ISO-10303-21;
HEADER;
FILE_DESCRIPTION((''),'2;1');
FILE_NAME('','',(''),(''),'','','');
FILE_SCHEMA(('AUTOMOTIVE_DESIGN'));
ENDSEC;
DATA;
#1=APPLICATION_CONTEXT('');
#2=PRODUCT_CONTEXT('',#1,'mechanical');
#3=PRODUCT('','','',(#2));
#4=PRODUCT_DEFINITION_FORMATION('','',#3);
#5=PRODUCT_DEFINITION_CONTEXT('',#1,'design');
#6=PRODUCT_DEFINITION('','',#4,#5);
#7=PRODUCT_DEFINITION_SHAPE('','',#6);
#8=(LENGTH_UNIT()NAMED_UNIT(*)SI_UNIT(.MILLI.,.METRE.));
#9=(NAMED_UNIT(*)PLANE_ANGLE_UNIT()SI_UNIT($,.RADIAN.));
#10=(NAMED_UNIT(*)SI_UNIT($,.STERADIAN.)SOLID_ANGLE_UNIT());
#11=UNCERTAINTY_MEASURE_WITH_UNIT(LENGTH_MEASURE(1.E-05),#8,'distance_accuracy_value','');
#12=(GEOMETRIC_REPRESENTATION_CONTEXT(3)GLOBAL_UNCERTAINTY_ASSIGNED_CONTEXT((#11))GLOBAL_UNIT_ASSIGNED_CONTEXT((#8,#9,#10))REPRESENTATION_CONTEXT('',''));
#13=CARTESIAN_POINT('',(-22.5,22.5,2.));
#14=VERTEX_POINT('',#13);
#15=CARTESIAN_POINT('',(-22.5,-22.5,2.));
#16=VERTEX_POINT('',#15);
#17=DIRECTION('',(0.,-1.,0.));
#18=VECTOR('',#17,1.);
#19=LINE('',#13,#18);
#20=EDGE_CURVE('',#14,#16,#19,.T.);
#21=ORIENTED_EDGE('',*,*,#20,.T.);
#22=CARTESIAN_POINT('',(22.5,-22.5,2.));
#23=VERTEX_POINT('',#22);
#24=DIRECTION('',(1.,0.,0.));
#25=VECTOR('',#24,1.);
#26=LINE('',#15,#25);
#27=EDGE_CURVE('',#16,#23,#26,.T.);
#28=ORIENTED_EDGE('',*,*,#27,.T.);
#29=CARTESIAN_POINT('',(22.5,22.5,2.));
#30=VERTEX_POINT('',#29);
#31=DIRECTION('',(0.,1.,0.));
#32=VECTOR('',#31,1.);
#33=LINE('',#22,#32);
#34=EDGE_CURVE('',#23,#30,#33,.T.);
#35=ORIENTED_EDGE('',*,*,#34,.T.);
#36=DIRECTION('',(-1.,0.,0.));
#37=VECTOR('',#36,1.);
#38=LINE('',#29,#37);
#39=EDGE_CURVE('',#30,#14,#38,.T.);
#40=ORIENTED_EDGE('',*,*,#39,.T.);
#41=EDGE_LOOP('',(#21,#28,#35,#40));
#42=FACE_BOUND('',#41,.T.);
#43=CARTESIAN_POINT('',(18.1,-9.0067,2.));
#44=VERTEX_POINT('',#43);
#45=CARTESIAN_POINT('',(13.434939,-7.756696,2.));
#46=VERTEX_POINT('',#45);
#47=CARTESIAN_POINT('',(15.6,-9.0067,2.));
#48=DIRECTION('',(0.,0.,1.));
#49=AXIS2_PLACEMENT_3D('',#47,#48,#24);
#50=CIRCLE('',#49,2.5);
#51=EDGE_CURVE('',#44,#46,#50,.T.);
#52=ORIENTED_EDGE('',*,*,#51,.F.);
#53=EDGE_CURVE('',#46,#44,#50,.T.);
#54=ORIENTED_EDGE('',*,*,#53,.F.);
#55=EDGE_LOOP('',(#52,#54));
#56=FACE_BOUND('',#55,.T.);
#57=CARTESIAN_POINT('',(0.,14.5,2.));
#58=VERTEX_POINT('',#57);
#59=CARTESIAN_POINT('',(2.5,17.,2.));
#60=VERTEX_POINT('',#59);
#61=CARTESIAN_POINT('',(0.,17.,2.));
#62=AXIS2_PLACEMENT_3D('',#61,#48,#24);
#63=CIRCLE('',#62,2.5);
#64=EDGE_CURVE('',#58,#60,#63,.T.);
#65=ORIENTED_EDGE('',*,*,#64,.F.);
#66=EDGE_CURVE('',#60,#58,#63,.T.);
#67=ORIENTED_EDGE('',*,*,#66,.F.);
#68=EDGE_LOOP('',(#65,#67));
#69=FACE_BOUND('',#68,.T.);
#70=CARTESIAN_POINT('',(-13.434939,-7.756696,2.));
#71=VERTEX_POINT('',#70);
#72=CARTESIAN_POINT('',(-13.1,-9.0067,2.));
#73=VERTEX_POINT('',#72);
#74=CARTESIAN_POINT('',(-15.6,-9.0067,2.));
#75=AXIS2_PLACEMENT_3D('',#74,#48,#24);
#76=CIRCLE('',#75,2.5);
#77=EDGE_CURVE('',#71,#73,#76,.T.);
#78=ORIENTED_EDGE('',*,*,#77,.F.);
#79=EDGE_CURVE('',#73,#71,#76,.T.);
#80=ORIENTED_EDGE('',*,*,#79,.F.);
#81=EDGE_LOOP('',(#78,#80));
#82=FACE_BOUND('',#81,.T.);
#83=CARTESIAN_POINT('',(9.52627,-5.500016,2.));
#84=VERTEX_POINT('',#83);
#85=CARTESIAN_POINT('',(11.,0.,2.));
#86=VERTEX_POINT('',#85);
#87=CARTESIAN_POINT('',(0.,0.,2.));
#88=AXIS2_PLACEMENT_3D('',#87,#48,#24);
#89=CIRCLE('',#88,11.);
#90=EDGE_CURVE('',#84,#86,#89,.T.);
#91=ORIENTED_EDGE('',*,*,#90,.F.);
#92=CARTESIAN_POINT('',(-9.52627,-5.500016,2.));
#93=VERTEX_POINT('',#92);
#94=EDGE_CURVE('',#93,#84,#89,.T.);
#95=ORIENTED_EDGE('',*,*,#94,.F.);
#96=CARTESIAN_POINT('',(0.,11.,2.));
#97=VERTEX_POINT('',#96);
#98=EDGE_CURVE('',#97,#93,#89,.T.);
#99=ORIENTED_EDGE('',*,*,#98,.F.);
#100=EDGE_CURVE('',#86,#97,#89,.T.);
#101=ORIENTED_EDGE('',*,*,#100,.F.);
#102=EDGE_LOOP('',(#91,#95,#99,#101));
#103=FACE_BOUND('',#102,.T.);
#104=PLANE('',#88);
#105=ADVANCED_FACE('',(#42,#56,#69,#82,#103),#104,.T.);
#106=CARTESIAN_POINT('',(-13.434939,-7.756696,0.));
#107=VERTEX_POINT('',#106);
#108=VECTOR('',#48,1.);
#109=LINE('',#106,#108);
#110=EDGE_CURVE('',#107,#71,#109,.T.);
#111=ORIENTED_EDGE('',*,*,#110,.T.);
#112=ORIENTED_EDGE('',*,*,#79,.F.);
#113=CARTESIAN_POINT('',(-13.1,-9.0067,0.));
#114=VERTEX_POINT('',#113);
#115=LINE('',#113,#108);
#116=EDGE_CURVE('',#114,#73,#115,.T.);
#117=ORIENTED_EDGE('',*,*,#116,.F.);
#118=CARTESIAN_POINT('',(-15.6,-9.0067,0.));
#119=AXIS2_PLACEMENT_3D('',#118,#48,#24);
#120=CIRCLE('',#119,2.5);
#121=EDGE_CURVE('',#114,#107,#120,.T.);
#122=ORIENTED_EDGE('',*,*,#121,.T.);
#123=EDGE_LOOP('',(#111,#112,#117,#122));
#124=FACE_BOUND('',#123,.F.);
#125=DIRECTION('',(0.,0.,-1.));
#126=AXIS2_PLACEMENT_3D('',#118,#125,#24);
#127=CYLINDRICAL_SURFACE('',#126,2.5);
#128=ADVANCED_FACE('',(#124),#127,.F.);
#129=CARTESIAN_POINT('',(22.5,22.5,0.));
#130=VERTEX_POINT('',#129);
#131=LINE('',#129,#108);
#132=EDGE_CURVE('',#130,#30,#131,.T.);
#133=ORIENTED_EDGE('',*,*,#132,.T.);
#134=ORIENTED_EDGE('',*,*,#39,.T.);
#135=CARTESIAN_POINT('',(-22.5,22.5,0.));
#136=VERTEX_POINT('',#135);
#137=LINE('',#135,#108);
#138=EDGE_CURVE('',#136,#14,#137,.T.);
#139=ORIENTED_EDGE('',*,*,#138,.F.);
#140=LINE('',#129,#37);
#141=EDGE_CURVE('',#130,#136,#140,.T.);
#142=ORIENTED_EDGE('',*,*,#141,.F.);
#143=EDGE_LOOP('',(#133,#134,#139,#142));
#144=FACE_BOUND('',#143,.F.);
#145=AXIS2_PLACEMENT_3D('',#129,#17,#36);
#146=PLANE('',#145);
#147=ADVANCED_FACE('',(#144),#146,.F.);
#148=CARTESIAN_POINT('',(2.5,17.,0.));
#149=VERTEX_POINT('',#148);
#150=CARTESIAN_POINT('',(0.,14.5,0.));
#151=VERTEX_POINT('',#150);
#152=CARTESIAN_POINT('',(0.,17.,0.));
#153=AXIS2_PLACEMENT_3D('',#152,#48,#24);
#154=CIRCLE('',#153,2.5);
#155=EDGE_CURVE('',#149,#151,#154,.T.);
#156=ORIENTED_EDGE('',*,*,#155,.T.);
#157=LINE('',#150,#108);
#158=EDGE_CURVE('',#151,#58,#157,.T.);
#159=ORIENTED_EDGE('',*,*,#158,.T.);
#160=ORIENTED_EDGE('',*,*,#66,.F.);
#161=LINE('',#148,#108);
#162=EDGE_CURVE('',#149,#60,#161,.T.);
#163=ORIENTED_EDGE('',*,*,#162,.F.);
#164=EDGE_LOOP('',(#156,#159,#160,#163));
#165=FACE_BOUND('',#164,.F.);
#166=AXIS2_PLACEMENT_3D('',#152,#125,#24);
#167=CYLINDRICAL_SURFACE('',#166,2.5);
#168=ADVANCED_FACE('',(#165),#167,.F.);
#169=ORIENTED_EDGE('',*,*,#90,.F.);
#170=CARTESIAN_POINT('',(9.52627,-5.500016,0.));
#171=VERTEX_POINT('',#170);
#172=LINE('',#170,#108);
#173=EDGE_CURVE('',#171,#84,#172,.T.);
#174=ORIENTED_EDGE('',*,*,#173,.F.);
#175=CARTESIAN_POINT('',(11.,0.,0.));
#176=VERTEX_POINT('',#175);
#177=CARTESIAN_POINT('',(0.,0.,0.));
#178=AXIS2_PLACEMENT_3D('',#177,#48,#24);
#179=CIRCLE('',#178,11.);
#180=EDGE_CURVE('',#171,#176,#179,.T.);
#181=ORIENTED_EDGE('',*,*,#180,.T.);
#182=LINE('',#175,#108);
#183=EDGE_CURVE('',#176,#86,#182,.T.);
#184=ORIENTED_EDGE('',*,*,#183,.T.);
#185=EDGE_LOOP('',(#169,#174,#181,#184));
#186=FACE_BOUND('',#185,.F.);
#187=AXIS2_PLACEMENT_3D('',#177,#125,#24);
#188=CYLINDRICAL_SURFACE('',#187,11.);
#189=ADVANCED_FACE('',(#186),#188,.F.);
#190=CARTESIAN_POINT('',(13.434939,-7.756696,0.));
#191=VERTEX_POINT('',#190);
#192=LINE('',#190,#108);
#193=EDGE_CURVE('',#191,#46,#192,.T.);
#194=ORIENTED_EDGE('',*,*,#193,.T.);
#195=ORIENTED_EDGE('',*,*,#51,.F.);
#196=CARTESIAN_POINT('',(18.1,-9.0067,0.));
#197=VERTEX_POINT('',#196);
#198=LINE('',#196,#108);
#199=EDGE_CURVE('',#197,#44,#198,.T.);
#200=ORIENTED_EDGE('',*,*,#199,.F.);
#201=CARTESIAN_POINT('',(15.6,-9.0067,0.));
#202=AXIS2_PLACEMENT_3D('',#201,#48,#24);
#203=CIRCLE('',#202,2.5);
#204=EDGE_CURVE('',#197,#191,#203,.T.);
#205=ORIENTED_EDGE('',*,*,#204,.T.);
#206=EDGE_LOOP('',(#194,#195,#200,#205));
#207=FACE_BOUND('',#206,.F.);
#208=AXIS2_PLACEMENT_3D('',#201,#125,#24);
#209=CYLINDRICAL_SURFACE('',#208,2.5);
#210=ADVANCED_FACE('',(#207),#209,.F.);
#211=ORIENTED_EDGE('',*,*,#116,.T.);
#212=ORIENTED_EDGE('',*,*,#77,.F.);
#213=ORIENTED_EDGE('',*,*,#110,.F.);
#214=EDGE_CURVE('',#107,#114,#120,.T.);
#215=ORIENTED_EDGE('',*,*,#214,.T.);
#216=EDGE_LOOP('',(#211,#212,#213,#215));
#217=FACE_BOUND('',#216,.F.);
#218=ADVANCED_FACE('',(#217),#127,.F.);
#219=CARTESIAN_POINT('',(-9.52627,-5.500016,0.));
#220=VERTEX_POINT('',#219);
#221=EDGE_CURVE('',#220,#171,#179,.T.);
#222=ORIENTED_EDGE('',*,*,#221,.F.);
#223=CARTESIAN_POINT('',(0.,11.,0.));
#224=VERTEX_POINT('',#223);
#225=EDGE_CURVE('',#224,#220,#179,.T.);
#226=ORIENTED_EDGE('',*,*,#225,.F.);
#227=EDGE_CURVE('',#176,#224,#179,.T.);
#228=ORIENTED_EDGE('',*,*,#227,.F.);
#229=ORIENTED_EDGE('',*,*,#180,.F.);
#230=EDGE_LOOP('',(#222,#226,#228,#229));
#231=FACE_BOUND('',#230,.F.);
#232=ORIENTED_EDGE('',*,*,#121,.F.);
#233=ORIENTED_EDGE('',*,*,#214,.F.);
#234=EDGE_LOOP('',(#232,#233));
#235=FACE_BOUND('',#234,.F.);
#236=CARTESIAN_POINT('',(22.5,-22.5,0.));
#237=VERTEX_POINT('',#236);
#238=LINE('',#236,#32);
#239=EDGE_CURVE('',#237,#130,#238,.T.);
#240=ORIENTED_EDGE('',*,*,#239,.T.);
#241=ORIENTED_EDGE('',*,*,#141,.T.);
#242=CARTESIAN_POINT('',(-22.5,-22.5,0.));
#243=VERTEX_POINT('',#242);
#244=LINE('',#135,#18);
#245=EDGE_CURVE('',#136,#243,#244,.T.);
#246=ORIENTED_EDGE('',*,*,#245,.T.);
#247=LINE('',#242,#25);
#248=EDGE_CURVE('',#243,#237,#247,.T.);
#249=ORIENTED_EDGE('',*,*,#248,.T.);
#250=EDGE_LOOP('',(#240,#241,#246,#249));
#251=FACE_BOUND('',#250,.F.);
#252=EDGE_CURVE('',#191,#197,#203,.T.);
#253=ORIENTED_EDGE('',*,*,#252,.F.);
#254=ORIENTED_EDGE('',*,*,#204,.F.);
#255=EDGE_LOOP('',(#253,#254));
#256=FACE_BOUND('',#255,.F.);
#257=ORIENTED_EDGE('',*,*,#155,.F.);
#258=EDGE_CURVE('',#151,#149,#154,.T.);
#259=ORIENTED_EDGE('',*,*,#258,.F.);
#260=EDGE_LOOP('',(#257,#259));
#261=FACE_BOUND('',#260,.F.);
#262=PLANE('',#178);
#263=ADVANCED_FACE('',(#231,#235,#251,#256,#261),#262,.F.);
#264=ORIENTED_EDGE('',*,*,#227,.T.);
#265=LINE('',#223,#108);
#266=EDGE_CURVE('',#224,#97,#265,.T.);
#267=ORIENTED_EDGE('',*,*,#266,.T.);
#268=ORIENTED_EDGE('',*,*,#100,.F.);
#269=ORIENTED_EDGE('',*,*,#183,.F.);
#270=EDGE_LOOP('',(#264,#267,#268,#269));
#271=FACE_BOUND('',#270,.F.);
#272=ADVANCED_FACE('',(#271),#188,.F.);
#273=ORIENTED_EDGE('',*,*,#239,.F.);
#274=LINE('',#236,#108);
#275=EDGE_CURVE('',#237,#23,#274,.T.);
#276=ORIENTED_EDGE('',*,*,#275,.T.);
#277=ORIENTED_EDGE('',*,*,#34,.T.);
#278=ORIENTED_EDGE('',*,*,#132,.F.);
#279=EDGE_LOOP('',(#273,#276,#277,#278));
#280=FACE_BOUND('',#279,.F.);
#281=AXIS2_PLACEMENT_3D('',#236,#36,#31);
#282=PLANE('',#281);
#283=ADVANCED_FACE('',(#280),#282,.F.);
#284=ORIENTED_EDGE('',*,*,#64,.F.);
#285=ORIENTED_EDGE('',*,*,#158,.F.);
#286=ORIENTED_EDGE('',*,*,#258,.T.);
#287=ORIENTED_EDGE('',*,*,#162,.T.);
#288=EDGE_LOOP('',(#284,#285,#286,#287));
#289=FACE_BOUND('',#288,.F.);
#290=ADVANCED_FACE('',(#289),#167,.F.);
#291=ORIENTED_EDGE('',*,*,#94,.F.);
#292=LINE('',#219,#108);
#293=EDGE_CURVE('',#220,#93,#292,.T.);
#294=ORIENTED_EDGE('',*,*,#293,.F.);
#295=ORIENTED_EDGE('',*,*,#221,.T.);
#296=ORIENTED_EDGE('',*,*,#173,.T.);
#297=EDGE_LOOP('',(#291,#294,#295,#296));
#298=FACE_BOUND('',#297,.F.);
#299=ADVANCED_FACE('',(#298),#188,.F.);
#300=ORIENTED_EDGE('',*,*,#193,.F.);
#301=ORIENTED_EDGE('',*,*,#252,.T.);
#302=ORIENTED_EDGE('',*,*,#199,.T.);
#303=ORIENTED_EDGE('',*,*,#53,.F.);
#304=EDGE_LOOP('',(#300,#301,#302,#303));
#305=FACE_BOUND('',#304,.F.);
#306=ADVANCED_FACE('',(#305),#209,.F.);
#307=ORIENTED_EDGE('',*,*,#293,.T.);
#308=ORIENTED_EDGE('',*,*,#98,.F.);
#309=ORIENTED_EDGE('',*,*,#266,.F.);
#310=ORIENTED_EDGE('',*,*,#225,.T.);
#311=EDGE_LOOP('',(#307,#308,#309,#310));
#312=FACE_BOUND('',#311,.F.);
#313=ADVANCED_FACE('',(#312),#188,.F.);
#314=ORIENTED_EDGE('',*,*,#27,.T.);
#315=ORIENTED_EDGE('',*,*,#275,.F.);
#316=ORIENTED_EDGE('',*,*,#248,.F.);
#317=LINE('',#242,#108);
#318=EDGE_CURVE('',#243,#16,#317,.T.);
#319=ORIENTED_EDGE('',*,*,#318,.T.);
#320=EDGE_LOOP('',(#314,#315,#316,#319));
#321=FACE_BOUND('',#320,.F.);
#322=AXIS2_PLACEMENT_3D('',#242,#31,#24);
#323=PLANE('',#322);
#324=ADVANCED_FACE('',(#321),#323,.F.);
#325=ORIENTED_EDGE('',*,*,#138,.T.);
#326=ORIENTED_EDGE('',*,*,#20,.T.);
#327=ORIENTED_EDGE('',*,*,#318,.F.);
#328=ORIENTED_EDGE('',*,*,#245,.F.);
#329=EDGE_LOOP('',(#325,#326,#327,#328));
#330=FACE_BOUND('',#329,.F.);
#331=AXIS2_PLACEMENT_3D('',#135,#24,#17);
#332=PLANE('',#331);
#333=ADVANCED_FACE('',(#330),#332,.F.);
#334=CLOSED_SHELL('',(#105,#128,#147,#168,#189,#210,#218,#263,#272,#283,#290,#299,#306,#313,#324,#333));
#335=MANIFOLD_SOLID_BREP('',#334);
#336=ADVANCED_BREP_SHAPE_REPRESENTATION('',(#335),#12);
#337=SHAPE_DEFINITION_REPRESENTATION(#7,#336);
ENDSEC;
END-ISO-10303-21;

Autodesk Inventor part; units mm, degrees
ref_plane "YZ Plane" through (0, 0, 0) normal (1, 0, 0) x (0, 1, 0)
ref_plane "XZ Plane" through (0, 0, 0) normal (0, 1, 0) x (-1, 0, 0)
ref_plane "XY Plane" through (0, 0, 0) normal (0, 0, 1) x (1, 0, 0)
sketch "Sketch1" plane through (0, 0, 0) normal (0, 0, 1) x (1, 0, 0)
  line L0 (-22.5, -22.5) -> (22.5, -22.5)
  line L1 (22.5, -22.5) -> (22.5, 22.5)
  line L2 (22.5, 22.5) -> (-22.5, 22.5)
  line L3 (-22.5, 22.5) -> (-22.5, -22.5)
  line L4 (-22.5, -22.5) -> (22.5, 22.5) construction
  line L5 (22.5, -22.5) -> (-22.5, 22.5) construction
  circle A0 centre (0, 0) radius 11
  line L6 (0, 0) -> (0, 17)
  line L7 (0, 0) -> (15.6, -9.0067)
  line L8 (0, 0) -> (-15.6, -9.0067)
  circle A1 centre (0, 17) radius 2.5
  circle A2 centre (15.6, -9.0067) radius 2.5
  circle A3 centre (-15.6, -9.0067) radius 2.5
  point P0 (22.5, -11.0947)
  point P1 (-22.5, -11.0947)
  dimension "d0" = 45
  dimension "d1" = 45
  dimension "d2" = 22
  dimension "d3" = 17
  dimension "d4" = 15.6
  dimension "d5" = 120
  dimension "d6" = 15.6
  dimension "d7" = 120
  dimension "d8" = 5
  dimension "d9" = 5
  dimension "d10" = 5
extrude "Extrusion2" add sketch "Sketch1" along normal blind 2
equation "\"d1\" = d0"
equation "\"d4\" = d6"
equation "\"d7\" = d5"
equation "\"d9\" = d8"
equation "\"d10\" = d8"
properties part number "mount_v08"
